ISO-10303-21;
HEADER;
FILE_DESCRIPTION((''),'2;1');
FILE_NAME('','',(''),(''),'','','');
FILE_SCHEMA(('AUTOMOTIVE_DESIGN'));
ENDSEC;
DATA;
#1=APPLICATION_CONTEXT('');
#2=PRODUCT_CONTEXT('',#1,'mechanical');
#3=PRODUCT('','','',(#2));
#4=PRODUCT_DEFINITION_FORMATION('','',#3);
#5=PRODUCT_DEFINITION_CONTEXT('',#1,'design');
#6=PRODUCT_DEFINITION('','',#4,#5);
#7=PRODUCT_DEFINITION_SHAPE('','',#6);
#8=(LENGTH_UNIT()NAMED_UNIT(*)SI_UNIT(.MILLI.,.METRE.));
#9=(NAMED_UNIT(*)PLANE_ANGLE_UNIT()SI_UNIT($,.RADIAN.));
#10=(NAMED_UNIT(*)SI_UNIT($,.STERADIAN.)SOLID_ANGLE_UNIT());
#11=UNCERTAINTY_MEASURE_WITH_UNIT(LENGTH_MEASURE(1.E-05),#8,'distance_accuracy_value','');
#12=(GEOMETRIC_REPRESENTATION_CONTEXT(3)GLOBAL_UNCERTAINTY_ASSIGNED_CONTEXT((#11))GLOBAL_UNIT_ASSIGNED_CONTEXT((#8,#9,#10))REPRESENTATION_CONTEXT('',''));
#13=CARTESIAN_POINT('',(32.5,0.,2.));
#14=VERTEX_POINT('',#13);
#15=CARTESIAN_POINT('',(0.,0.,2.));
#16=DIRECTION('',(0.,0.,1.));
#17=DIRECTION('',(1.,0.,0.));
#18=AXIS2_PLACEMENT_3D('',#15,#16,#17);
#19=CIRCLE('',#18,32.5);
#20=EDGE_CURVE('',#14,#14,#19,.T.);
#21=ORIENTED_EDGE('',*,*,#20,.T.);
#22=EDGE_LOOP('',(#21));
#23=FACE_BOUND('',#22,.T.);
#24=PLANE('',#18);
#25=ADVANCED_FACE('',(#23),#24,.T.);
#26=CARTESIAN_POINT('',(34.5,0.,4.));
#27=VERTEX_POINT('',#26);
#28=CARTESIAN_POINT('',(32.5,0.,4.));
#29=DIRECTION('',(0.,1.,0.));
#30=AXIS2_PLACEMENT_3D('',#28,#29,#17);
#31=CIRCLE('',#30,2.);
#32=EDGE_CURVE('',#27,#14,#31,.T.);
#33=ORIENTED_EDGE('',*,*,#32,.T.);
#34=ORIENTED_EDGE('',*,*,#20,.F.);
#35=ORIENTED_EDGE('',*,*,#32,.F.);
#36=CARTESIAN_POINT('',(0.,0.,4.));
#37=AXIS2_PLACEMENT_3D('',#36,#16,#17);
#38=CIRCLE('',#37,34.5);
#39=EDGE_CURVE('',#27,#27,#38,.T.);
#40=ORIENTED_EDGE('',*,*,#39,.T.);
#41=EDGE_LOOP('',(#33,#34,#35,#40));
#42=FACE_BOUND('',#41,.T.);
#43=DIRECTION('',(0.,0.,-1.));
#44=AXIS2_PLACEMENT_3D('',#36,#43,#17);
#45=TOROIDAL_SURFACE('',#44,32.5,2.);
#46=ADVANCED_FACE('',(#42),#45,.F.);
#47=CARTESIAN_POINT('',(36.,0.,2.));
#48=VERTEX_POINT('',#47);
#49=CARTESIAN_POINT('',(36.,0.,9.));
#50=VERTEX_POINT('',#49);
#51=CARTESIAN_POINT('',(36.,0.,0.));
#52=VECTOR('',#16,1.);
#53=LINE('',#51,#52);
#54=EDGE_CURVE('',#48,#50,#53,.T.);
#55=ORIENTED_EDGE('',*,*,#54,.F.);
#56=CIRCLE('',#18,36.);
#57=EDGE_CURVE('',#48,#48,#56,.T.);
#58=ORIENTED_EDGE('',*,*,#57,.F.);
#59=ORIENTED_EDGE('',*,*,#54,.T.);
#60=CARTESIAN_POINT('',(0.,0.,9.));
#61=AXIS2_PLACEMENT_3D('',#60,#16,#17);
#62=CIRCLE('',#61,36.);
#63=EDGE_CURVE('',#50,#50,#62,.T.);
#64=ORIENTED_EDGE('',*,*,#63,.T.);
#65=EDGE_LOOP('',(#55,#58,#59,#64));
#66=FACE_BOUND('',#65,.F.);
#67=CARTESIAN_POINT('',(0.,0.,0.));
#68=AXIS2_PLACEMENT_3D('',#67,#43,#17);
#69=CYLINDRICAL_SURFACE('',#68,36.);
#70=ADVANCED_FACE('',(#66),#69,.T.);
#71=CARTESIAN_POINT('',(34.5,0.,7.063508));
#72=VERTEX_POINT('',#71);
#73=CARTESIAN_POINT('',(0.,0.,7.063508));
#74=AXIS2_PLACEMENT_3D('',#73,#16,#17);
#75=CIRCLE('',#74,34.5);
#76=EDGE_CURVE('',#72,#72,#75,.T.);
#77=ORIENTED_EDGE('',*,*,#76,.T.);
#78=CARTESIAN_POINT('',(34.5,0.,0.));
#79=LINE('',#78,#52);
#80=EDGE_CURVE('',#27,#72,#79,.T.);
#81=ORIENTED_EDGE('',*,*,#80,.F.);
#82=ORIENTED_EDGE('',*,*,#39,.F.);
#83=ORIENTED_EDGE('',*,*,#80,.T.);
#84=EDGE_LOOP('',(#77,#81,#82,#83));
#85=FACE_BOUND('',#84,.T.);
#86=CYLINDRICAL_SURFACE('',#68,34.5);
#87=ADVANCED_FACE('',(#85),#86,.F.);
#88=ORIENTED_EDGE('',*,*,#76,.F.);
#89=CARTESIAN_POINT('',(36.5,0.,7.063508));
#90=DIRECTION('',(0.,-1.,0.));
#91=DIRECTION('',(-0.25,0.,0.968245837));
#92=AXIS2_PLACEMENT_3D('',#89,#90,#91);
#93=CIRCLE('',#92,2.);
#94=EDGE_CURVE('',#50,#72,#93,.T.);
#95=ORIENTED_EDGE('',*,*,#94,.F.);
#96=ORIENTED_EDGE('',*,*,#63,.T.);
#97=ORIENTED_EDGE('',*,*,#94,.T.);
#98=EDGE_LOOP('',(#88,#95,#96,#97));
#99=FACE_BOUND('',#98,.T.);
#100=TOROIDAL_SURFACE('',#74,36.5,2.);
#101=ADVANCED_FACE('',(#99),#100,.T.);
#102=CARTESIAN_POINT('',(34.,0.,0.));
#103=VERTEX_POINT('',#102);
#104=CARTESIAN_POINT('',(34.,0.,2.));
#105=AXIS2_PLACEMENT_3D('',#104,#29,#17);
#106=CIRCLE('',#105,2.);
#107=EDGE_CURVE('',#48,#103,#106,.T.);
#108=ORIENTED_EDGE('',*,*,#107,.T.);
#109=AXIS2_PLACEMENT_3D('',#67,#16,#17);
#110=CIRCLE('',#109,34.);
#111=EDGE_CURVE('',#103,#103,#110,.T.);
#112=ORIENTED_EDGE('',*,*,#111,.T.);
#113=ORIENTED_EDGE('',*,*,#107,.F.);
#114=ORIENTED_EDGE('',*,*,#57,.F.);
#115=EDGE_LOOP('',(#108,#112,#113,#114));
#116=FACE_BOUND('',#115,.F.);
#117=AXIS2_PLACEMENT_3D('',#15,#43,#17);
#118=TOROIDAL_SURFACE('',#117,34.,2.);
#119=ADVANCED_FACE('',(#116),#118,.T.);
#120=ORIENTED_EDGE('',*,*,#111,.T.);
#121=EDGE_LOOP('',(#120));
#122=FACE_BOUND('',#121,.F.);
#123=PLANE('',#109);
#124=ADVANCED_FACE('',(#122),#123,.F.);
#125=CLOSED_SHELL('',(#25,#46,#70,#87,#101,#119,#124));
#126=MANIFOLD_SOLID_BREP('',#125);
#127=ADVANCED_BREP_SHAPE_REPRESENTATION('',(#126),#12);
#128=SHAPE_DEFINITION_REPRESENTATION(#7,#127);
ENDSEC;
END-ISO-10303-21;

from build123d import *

# Parameters (mm, degrees)
F0_R     = 34.5
F1_DEPTH = 2
F0_R_2   = 36
F2_DEPTH = 9
F4_R     = 2


# Not quite as in the source:
# - a fillet or chamfer that OpenCascade refuses, or shapes differently, is made with other operations: its cross-section is extruded or revolved along the edge and cut away or added


with BuildPart() as f1:
    # F0 (on Top) → F1 (new body)
    with BuildSketch(Plane.XY):
        Circle(F0_R)
    extrude(amount=F1_DEPTH)

    # F0 (on Top) → F2 (join)
    with BuildSketch(Plane.XY):
        Circle(F0_R_2)
        Circle(F0_R, mode=Mode.SUBTRACT)
    extrude(amount=F2_DEPTH)

    # F3: fillet of radius 2 on 2 edges, made by hand

    # F3_s1 → F3_t2 (revolve)
    with BuildSketch(Plane.XZ):
        with BuildLine():
            ThreePointArc((34.5, 4), (33.9142135624, 2.5857864376), (32.5, 2))
            Line((32.5, 2), (34.5, 2))
            Line((34.5, 2), (34.5, 4))
        make_face()
    revolve(axis=Axis((0, 0, 2), (0, 0, 1)))

    # F3_s3 → F3_t4 (revolve, cut)
    with BuildSketch(Plane.XZ):
        with BuildLine():
            ThreePointArc((36, 9), (34.9188611699, 8.2882531983), (34.5, 7.0635083269))
            Line((34.5, 7.0635083269), (34.5, 9))
            Line((34.5, 9), (36, 9))
        make_face()
    revolve(axis=Axis((0, 0, 9), (0, 0, 1)), mode=Mode.SUBTRACT)

    # F4
    f4_edges = [f1.edges().sort_by_distance(p)[0] for p in [
        (-36, 0, 0),
    ]]
    fillet(f4_edges, radius=F4_R)


solid = f1.part
